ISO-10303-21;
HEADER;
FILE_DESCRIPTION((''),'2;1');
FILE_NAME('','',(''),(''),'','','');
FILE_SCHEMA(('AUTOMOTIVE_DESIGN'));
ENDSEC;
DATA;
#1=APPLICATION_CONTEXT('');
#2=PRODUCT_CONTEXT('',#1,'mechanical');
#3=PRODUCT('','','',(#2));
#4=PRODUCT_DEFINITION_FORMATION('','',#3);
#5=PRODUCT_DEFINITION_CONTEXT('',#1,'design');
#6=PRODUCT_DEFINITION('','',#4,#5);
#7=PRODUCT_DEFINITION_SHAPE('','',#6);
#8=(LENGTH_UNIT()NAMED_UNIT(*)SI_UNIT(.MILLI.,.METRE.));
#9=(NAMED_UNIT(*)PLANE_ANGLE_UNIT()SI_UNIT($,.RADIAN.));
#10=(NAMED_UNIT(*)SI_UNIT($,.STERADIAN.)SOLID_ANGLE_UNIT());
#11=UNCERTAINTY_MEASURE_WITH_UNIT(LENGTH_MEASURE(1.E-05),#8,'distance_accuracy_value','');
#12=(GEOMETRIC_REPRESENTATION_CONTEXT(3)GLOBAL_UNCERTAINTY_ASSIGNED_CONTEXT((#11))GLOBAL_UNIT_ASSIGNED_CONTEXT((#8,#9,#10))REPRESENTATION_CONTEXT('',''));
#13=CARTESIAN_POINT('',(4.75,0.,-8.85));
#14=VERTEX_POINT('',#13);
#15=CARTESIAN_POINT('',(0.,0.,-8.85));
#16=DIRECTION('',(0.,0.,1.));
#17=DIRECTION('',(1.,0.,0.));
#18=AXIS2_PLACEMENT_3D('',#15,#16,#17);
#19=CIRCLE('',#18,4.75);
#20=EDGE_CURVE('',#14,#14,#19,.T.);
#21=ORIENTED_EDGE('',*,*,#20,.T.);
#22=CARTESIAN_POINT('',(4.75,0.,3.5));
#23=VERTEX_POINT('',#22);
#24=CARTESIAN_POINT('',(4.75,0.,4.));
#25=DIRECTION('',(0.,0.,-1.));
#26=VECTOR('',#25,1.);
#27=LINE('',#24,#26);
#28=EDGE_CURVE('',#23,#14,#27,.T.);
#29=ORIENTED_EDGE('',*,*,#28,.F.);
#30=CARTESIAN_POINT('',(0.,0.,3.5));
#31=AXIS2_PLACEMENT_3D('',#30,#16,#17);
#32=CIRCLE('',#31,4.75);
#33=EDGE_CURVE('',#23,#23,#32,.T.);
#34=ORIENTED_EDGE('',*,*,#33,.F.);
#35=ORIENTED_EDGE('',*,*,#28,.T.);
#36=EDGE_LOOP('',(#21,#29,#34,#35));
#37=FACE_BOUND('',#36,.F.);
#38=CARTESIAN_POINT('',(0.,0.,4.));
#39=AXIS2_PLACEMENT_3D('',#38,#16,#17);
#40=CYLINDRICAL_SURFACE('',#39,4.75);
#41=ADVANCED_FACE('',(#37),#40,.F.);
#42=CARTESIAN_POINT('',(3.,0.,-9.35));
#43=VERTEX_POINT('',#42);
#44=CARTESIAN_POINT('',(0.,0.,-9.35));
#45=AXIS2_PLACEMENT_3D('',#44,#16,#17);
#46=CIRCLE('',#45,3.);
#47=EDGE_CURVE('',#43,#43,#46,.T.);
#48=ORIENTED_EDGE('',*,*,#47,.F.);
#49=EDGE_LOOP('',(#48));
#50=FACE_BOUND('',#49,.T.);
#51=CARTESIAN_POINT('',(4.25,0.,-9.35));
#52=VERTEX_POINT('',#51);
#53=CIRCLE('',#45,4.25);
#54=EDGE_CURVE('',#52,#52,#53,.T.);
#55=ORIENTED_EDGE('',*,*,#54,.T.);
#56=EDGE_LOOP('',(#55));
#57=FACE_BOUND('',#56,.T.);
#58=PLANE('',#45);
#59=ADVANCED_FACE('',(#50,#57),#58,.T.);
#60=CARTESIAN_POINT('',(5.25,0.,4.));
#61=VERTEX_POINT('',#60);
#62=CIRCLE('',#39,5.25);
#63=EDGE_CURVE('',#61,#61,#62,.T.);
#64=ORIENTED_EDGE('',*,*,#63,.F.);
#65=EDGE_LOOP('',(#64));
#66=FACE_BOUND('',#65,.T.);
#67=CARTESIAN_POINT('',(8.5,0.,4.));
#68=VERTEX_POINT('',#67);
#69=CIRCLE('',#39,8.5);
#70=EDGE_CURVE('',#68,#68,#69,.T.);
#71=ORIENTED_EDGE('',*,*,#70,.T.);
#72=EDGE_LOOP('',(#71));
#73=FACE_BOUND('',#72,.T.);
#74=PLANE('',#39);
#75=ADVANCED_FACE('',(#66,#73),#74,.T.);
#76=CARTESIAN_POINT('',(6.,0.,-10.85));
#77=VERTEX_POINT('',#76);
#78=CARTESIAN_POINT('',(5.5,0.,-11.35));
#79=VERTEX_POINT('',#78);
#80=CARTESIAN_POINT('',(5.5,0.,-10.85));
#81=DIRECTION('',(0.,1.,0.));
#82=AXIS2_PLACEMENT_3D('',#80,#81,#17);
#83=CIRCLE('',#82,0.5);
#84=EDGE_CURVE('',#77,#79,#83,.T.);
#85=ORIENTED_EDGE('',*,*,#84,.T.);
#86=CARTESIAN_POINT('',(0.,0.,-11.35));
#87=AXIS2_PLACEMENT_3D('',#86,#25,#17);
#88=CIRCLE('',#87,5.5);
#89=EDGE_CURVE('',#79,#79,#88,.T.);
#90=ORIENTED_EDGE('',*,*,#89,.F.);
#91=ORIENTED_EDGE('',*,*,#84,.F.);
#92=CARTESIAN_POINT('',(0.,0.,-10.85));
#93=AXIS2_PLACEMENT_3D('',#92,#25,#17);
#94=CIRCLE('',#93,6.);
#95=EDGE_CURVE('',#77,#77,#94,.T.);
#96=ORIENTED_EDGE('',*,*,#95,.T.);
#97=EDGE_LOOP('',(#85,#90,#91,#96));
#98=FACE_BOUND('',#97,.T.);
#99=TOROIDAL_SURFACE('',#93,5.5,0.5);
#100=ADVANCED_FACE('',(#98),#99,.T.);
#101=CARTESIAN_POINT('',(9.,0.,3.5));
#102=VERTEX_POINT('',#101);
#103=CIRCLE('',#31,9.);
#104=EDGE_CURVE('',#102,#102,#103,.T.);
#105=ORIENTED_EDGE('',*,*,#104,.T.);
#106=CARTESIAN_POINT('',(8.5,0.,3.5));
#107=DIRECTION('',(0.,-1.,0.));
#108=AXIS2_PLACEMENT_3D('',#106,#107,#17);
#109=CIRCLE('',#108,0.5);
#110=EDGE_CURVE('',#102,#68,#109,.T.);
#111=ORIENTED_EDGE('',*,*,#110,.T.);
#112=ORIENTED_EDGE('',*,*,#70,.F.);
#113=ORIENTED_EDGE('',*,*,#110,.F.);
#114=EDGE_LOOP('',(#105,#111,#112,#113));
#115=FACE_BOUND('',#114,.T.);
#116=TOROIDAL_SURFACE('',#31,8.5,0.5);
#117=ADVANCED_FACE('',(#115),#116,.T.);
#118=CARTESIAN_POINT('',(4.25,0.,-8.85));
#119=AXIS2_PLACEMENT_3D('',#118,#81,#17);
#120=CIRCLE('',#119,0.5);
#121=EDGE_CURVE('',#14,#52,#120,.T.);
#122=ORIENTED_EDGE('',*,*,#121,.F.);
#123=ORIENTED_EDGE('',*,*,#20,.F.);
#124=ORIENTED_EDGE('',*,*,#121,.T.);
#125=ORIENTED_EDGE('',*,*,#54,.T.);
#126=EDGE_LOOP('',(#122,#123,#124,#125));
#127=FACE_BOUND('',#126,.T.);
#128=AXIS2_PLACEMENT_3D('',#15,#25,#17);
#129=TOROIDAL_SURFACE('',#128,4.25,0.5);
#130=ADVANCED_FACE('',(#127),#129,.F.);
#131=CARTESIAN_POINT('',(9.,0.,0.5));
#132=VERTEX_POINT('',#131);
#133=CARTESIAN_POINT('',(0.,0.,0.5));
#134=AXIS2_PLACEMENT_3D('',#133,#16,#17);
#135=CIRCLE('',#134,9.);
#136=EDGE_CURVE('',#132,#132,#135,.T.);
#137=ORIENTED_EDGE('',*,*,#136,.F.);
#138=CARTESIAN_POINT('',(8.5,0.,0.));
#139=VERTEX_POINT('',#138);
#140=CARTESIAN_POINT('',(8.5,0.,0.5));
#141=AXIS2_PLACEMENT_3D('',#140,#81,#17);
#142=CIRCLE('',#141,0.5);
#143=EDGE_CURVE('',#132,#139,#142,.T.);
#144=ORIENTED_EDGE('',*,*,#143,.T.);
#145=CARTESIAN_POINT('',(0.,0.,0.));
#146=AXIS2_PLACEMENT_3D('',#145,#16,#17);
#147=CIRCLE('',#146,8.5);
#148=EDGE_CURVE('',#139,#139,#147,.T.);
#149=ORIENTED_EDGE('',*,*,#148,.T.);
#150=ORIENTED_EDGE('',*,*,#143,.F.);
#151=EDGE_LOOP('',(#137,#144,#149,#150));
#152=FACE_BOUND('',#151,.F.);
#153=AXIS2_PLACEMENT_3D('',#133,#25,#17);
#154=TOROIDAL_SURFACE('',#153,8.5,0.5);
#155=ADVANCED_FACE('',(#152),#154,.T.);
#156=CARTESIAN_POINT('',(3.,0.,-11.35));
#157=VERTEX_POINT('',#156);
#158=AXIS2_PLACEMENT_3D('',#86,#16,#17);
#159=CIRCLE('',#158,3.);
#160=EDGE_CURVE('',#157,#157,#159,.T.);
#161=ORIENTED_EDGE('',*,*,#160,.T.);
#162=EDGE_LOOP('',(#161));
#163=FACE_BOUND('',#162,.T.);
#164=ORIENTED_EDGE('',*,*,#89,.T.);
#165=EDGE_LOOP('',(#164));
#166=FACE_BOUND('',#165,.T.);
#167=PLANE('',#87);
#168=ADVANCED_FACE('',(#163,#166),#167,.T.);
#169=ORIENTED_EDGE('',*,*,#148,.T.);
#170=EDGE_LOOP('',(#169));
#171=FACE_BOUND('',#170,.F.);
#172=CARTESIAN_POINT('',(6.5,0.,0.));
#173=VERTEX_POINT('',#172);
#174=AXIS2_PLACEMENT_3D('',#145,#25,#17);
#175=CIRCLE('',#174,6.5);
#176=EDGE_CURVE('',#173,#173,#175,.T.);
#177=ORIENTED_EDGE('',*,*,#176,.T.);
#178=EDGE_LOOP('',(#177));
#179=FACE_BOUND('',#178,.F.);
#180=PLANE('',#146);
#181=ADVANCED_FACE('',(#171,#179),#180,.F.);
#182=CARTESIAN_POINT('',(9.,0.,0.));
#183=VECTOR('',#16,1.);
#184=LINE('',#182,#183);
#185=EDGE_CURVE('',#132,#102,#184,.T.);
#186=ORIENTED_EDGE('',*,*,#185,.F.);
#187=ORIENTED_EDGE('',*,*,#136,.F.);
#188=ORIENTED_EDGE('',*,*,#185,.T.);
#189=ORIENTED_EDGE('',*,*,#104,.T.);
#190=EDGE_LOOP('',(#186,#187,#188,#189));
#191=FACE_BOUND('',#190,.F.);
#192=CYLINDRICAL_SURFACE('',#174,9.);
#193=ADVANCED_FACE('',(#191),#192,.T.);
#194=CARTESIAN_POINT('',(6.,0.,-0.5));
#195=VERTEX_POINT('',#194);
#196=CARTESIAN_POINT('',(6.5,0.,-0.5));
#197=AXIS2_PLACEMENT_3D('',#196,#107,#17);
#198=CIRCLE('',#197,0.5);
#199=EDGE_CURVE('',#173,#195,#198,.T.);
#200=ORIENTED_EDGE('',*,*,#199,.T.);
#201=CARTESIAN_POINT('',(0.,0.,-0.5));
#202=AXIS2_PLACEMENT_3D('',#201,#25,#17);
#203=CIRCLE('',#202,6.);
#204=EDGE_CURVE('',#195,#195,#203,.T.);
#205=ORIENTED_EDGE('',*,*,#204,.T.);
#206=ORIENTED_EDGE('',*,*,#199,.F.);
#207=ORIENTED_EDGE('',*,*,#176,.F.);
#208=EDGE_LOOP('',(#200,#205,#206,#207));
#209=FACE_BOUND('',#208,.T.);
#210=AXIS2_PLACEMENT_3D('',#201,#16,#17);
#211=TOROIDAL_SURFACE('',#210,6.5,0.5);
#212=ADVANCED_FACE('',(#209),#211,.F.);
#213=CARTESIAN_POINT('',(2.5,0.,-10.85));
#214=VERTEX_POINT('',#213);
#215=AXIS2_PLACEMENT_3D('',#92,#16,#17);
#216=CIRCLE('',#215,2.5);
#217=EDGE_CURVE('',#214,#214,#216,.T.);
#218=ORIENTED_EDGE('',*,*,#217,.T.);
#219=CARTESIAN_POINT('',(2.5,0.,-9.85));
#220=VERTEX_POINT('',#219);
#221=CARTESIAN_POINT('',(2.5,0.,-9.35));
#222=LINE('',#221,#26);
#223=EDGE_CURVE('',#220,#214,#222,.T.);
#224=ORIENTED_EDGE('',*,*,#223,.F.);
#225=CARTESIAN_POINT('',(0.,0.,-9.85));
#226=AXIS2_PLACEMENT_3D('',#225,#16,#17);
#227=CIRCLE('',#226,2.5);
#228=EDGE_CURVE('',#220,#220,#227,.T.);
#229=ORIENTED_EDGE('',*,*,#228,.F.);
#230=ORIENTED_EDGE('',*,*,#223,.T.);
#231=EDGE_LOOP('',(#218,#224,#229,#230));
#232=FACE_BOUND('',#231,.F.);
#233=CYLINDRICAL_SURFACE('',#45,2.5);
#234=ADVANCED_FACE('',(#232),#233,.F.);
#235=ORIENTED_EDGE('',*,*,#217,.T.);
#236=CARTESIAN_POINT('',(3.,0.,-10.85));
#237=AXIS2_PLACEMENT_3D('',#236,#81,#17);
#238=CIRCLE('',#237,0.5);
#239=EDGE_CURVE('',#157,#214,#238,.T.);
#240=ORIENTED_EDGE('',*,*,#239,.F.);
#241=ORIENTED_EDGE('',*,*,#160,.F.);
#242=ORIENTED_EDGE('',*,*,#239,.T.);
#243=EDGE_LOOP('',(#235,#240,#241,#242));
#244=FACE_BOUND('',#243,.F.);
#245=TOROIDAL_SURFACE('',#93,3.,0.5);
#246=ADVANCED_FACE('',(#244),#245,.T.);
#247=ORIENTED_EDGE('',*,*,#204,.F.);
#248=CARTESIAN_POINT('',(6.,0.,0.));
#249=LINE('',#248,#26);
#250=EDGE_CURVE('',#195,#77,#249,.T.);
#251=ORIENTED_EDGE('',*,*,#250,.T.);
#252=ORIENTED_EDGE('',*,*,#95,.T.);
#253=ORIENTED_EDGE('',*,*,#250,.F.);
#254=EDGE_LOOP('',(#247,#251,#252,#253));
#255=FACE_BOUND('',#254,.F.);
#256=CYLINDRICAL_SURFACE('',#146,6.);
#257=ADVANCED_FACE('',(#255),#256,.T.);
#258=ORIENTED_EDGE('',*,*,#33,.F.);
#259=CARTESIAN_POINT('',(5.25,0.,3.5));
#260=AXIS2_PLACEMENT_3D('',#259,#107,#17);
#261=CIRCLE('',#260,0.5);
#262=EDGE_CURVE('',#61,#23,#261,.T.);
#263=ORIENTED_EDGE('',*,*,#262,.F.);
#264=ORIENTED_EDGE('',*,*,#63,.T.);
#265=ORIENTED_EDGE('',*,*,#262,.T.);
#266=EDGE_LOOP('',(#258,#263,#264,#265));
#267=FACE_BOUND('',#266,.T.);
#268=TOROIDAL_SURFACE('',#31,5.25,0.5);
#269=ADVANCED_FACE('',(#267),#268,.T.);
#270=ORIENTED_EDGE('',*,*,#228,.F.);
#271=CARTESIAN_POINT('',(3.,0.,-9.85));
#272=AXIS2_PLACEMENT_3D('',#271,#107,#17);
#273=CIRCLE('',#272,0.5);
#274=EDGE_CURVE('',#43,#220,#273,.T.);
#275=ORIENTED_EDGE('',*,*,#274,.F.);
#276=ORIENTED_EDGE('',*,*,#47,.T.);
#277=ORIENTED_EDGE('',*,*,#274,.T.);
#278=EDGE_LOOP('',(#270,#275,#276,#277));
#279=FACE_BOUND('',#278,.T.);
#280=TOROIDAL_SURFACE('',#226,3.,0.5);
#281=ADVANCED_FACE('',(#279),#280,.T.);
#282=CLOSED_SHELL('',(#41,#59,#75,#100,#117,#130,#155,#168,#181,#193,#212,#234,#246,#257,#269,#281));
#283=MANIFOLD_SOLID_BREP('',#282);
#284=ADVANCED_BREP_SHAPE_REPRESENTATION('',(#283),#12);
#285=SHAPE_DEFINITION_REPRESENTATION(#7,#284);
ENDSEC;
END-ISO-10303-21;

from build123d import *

# Parameters (mm, degrees)
F0_R     = 9
F1_DEPTH = 4
F2_R     = 6
F3_DEPTH = 11.35
F4_R     = 4.75
F5_DEPTH = 13.35
F6_R     = 0.5
F7_R     = 2.5
F8_DEPTH = 2.001
F9_R     = 0.5


# Not quite as in the source:
# - two fillets or chamfers of one size are made in one step


with BuildPart() as f1:
    # F0 (on Top) → F1 (new body)
    with BuildSketch(Plane.XY):
        Circle(F0_R)
    extrude(amount=F1_DEPTH)

    # F2 (on face) → F3 (join)
    with BuildSketch(Plane(origin=(0, 0, 0), x_dir=(1, 0, 0), z_dir=(0, 0, -1))):
        Circle(F2_R)
    extrude(amount=F3_DEPTH)

    # F4 (on face) → F5 (cut, through all)
    with BuildSketch(Plane.XY.offset(4)):
        Circle(F4_R)
    extrude(amount=-F5_DEPTH, mode=Mode.SUBTRACT)

    # F6
    f6_edges = [f1.edges().sort_by_distance(p)[0] for p in [
        (-9, 0, 4),
        (-6, 0, 0),
        (-9, 0, 0),
        (-4.75, 0, 4),
        (-6, 0, -11.35),
        (-4.75, 0, -9.35),
    ]]
    fillet(f6_edges, radius=F6_R)

    # F7 (on face) → F8 (cut, through all)
    with BuildSketch(Plane.XY.offset(-9.35)):
        Circle(F7_R)
    extrude(amount=-F8_DEPTH, mode=Mode.SUBTRACT)

    # F9
    f9_edges = [f1.edges().sort_by_distance(p)[0] for p in [
        (-2.5, 0, -11.35),
        (-2.5, 0, -9.35),
    ]]
    fillet(f9_edges, radius=F9_R)


solid = f1.part
